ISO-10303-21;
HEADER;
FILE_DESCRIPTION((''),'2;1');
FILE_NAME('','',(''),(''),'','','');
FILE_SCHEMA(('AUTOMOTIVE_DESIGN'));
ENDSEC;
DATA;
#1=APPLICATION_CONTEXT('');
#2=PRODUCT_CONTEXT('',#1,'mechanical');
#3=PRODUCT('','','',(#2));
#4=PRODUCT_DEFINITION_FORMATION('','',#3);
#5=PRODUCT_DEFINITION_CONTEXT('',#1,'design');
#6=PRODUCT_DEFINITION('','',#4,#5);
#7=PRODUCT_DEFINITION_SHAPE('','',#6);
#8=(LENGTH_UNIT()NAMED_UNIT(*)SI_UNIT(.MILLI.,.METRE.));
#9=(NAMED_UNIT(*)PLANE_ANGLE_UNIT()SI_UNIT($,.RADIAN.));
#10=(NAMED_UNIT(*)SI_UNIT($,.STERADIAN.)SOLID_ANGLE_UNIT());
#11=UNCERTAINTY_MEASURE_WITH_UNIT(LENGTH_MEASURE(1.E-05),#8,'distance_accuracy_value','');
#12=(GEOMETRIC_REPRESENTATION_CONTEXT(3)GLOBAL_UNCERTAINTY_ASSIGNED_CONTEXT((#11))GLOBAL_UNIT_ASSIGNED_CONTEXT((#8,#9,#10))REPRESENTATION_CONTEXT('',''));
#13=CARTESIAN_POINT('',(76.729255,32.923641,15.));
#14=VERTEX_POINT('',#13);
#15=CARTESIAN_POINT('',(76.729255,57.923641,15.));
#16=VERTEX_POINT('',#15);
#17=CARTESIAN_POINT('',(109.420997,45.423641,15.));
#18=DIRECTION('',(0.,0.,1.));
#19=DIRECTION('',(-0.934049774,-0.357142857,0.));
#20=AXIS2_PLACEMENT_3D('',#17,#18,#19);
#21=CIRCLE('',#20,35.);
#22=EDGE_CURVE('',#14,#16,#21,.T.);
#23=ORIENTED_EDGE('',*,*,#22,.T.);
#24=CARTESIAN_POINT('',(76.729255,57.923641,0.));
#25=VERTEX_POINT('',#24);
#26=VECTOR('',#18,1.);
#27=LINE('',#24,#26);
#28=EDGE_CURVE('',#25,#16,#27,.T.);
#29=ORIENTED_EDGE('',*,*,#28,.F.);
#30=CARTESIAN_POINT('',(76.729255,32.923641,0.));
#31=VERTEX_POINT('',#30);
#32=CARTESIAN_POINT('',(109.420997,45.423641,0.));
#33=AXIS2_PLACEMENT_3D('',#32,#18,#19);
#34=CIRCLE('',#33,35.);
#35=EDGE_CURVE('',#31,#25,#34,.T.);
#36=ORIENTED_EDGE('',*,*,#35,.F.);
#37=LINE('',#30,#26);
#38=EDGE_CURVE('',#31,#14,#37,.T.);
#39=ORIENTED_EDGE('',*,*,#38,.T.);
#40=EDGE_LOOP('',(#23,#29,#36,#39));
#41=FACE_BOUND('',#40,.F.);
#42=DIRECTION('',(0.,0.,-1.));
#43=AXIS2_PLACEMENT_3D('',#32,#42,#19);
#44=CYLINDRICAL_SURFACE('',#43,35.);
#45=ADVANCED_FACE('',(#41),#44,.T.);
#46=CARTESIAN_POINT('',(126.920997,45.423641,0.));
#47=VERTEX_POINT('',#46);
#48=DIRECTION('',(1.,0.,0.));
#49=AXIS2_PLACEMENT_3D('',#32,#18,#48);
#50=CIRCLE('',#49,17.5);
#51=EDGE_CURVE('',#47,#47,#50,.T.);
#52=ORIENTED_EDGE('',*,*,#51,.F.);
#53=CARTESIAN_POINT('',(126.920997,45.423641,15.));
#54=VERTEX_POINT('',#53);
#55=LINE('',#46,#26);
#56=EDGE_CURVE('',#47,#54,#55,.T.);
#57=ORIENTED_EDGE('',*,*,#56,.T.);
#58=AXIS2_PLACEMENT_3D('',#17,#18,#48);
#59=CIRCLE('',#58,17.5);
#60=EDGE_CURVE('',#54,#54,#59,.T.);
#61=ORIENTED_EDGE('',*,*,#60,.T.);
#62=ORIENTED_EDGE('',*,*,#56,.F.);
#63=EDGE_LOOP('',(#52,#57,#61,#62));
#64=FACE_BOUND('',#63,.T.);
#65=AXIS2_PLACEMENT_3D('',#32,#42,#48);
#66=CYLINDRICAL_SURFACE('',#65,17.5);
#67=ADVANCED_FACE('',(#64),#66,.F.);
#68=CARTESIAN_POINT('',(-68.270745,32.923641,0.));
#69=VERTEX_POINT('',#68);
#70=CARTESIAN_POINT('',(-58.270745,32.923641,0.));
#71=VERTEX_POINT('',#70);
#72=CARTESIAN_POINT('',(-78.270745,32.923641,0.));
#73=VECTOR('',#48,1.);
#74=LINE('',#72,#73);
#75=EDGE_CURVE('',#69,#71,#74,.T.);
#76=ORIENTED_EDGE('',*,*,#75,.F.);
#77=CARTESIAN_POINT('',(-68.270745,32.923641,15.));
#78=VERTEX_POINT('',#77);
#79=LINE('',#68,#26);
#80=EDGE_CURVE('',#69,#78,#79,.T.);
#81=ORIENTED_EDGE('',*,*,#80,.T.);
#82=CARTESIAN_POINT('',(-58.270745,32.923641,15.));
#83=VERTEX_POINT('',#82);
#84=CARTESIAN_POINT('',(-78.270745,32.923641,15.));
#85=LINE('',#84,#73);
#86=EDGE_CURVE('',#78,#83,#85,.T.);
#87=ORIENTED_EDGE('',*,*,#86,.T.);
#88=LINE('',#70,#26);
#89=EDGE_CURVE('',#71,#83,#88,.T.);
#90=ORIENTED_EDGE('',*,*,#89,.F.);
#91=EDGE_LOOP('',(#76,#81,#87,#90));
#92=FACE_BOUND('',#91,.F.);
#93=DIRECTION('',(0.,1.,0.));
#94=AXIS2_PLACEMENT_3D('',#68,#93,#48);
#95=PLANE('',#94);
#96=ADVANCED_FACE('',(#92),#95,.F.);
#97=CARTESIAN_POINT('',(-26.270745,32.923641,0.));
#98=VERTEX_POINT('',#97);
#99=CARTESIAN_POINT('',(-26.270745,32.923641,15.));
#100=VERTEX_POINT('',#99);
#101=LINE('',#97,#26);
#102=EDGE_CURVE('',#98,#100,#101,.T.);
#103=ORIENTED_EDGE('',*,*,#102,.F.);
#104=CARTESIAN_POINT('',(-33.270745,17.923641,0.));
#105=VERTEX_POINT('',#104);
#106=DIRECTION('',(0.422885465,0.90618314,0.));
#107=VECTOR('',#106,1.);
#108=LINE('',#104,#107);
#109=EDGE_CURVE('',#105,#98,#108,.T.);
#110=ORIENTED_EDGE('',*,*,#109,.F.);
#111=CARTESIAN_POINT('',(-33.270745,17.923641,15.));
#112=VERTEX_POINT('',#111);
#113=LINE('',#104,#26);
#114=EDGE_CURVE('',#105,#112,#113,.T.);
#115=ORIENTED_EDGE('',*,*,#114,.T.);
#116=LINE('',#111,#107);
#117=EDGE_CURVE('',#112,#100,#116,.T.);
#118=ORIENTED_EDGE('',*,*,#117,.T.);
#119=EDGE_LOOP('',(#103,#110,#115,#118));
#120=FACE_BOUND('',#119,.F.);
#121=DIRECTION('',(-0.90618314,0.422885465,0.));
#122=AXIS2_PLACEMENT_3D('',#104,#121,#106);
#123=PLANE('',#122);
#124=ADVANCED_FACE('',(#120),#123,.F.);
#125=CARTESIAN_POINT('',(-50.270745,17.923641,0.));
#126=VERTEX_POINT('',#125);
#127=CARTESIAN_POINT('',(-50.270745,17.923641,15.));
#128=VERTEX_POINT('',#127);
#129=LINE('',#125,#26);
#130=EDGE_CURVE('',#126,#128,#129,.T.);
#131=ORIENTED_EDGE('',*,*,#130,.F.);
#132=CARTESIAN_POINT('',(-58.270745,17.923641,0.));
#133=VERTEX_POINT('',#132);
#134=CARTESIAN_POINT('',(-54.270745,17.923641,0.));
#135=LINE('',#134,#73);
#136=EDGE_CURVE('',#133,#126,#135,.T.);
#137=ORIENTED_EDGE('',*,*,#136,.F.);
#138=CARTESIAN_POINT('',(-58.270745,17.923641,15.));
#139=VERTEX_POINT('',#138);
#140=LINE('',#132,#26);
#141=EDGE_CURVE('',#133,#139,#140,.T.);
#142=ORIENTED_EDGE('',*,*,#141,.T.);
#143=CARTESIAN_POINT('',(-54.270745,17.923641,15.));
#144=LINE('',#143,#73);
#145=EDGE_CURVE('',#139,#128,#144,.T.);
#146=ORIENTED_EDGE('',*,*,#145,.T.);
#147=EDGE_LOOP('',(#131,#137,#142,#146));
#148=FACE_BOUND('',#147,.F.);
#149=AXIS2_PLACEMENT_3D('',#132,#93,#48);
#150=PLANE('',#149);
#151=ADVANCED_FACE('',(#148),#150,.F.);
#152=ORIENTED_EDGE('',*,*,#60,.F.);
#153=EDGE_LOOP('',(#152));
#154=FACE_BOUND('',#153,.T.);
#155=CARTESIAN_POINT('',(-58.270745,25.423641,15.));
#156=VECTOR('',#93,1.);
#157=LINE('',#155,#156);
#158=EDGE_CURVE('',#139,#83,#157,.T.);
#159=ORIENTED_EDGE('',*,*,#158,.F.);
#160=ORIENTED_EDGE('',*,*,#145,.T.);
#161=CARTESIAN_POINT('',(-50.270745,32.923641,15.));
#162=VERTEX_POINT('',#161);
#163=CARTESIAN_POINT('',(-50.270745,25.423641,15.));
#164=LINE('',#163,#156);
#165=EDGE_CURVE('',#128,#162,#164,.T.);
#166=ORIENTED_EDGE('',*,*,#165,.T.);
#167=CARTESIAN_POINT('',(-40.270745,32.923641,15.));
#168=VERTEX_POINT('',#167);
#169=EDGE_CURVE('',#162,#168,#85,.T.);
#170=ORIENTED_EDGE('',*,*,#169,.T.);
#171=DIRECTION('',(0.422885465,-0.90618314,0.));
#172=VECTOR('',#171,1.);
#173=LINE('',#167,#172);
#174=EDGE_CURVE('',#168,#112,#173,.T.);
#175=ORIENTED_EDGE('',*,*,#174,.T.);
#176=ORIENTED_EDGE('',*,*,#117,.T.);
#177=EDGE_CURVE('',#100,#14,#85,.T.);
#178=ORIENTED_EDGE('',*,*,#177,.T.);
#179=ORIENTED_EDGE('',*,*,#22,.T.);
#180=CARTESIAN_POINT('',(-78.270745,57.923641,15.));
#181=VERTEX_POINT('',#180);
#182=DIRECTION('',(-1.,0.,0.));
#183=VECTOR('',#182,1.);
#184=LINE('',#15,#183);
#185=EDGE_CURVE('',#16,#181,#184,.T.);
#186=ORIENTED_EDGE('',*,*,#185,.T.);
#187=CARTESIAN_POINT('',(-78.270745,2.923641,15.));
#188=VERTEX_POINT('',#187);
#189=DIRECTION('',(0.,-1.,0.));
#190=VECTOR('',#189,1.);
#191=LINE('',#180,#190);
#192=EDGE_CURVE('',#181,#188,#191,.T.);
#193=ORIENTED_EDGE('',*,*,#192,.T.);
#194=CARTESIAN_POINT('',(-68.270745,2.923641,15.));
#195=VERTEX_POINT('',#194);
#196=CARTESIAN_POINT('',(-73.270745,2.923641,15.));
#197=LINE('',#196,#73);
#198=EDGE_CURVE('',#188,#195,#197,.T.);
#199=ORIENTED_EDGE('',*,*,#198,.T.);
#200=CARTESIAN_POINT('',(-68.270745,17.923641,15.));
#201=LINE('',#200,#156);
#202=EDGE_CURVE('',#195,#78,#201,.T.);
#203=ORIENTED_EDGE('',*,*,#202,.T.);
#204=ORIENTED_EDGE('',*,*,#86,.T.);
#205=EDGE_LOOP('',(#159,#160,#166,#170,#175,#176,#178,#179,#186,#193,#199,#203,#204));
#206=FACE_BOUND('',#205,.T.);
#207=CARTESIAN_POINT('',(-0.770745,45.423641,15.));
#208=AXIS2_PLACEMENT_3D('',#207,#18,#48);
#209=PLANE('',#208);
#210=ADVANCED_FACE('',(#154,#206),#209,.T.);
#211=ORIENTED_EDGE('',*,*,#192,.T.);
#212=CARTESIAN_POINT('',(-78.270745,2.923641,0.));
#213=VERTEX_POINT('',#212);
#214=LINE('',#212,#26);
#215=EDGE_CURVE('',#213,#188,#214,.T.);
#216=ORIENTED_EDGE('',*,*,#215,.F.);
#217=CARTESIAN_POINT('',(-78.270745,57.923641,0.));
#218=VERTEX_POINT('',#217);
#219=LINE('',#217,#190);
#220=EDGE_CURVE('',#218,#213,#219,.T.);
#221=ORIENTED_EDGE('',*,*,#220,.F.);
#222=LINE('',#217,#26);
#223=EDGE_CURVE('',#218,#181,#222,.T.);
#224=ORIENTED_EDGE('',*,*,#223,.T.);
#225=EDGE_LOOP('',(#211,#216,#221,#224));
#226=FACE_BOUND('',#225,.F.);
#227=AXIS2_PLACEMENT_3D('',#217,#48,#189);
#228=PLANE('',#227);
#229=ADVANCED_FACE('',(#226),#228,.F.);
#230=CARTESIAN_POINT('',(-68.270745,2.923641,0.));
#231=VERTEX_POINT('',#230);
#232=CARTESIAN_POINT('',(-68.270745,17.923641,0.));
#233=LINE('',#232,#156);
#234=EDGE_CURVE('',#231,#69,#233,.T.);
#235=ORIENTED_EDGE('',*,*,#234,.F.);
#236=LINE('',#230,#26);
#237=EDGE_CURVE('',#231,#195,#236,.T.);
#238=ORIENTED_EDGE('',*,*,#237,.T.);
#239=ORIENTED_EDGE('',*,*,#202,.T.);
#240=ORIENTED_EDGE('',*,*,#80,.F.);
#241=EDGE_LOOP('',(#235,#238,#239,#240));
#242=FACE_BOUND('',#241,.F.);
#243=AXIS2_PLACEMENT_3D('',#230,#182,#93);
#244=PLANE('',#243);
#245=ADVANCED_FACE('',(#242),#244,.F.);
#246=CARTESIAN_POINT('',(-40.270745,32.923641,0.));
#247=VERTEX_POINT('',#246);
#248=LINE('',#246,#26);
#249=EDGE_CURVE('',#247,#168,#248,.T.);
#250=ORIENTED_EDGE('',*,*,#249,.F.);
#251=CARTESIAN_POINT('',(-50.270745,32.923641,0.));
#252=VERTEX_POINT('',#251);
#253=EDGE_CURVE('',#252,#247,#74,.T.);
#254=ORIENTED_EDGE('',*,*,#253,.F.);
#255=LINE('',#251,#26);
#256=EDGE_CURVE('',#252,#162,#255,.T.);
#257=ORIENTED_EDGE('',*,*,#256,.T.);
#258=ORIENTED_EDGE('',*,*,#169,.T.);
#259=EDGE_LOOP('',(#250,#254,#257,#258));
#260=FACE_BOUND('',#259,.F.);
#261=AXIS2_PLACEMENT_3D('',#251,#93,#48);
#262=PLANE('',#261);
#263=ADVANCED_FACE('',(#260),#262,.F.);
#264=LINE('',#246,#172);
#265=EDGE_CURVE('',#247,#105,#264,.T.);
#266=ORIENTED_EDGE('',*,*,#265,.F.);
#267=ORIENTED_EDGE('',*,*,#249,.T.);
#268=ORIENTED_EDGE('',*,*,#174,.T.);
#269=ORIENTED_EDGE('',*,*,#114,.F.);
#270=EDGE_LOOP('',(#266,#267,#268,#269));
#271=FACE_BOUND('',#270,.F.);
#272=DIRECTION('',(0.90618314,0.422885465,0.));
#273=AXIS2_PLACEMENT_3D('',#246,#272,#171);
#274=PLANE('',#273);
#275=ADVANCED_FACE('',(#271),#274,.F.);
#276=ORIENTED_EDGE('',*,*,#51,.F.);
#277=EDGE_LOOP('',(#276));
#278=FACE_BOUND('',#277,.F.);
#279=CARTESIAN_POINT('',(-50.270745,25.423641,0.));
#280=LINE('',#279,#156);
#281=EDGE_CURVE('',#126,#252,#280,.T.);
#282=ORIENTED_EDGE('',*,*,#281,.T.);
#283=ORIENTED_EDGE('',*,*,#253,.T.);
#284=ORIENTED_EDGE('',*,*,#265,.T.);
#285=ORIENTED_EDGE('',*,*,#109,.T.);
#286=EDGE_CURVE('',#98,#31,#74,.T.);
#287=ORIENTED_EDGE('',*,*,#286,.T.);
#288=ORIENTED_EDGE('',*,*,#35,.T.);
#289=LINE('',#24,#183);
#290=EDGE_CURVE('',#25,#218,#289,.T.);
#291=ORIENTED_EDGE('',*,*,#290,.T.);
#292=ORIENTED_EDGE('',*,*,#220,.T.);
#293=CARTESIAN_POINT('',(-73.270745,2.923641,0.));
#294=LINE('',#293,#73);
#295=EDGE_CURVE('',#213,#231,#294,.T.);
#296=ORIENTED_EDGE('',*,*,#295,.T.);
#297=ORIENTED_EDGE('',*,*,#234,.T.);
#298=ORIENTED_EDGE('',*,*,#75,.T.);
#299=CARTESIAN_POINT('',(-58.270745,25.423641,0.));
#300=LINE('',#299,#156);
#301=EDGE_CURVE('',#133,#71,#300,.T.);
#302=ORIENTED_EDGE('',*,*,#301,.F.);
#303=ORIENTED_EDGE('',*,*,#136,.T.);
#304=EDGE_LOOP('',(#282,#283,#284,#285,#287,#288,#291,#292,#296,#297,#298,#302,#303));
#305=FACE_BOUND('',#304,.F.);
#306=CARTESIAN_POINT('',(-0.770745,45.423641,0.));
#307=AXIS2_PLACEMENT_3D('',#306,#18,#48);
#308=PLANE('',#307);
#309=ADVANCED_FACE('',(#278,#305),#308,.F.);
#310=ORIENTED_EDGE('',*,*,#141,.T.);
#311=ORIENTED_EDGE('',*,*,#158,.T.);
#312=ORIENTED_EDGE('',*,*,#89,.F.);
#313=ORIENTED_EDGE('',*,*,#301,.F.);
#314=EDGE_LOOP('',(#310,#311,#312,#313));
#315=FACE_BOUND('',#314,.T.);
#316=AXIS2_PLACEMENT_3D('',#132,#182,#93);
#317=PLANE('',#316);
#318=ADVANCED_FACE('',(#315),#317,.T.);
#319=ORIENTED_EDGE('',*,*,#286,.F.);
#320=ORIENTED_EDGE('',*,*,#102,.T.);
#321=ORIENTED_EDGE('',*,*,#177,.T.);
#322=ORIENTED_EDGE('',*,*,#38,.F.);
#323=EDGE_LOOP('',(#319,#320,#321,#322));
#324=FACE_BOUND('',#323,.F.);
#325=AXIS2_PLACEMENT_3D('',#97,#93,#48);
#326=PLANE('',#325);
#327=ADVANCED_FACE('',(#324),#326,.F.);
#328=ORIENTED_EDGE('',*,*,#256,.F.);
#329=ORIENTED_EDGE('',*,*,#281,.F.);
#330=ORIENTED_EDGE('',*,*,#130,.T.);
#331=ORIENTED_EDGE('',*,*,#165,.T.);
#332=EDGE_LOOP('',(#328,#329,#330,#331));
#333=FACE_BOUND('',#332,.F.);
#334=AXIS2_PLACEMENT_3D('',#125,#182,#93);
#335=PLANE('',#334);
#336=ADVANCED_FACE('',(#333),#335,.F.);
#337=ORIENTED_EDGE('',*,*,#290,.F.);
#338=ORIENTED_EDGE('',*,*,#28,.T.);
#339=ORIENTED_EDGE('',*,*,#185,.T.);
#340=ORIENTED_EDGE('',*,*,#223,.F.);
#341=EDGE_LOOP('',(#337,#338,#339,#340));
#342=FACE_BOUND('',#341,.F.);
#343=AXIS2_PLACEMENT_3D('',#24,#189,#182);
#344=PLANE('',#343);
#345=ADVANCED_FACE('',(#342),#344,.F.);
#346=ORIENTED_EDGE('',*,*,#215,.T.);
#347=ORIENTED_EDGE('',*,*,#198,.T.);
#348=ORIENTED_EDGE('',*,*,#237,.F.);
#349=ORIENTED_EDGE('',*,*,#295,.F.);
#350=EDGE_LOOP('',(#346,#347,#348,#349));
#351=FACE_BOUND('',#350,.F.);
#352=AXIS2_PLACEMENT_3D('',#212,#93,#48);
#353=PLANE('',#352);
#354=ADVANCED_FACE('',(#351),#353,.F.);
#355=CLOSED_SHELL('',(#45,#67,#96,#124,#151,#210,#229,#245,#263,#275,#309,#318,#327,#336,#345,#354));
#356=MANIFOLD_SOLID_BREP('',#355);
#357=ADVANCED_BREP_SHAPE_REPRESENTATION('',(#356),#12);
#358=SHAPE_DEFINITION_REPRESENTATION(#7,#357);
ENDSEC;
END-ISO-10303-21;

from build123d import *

# Parameters (mm, degrees)
F0_W     = 8
F0_H     = 15
F0_W_2   = 10
F0_H_2   = 30
F0_R     = 17.5
F1_DEPTH = 15


# Not quite as in the source:
# - a feature of the source that left no trace in its solid (it failed there, or was rolled back) is left out


with BuildPart() as f1:
    # F0 (on Top) → F1 (new body)
    with BuildSketch(Plane.XY):
        Polygon((76.7292545206, 57.9236412775), (-78.2707454794, 57.9236412775), (-78.2707454794, 32.9236412775), (-68.2707454794, 32.9236412775), (-58.2707454794, 32.9236412775), (-50.2707454794, 32.9236412775), (-40.2707454794, 32.9236412775), (-26.2707454794, 32.9236412775), (76.7292545206, 32.9236412775), align=None)
        Polygon((-33.2707454794, 17.9236412775), (-26.2707454794, 32.9236412775), (-40.2707454794, 32.9236412775), align=None)
        with Locations((-54.2707454794, 25.4236412775)):
            Rectangle(F0_W, F0_H)
        with Locations((-73.2707454794, 17.9236412775)):
            Rectangle(F0_W_2, F0_H_2)
        with BuildLine():
            ThreePointArc((76.7292545206, 32.9236412775), (144.4209965971, 45.4236412775), (76.7292545206, 57.9236412775))
            Line((76.7292545206, 57.9236412775), (76.7292545206, 32.9236412775))
        make_face()
        with Locations((109.4209965971, 45.4236412775)):
            Circle(F0_R, mode=Mode.SUBTRACT)
    extrude(amount=F1_DEPTH)


solid = f1.part
